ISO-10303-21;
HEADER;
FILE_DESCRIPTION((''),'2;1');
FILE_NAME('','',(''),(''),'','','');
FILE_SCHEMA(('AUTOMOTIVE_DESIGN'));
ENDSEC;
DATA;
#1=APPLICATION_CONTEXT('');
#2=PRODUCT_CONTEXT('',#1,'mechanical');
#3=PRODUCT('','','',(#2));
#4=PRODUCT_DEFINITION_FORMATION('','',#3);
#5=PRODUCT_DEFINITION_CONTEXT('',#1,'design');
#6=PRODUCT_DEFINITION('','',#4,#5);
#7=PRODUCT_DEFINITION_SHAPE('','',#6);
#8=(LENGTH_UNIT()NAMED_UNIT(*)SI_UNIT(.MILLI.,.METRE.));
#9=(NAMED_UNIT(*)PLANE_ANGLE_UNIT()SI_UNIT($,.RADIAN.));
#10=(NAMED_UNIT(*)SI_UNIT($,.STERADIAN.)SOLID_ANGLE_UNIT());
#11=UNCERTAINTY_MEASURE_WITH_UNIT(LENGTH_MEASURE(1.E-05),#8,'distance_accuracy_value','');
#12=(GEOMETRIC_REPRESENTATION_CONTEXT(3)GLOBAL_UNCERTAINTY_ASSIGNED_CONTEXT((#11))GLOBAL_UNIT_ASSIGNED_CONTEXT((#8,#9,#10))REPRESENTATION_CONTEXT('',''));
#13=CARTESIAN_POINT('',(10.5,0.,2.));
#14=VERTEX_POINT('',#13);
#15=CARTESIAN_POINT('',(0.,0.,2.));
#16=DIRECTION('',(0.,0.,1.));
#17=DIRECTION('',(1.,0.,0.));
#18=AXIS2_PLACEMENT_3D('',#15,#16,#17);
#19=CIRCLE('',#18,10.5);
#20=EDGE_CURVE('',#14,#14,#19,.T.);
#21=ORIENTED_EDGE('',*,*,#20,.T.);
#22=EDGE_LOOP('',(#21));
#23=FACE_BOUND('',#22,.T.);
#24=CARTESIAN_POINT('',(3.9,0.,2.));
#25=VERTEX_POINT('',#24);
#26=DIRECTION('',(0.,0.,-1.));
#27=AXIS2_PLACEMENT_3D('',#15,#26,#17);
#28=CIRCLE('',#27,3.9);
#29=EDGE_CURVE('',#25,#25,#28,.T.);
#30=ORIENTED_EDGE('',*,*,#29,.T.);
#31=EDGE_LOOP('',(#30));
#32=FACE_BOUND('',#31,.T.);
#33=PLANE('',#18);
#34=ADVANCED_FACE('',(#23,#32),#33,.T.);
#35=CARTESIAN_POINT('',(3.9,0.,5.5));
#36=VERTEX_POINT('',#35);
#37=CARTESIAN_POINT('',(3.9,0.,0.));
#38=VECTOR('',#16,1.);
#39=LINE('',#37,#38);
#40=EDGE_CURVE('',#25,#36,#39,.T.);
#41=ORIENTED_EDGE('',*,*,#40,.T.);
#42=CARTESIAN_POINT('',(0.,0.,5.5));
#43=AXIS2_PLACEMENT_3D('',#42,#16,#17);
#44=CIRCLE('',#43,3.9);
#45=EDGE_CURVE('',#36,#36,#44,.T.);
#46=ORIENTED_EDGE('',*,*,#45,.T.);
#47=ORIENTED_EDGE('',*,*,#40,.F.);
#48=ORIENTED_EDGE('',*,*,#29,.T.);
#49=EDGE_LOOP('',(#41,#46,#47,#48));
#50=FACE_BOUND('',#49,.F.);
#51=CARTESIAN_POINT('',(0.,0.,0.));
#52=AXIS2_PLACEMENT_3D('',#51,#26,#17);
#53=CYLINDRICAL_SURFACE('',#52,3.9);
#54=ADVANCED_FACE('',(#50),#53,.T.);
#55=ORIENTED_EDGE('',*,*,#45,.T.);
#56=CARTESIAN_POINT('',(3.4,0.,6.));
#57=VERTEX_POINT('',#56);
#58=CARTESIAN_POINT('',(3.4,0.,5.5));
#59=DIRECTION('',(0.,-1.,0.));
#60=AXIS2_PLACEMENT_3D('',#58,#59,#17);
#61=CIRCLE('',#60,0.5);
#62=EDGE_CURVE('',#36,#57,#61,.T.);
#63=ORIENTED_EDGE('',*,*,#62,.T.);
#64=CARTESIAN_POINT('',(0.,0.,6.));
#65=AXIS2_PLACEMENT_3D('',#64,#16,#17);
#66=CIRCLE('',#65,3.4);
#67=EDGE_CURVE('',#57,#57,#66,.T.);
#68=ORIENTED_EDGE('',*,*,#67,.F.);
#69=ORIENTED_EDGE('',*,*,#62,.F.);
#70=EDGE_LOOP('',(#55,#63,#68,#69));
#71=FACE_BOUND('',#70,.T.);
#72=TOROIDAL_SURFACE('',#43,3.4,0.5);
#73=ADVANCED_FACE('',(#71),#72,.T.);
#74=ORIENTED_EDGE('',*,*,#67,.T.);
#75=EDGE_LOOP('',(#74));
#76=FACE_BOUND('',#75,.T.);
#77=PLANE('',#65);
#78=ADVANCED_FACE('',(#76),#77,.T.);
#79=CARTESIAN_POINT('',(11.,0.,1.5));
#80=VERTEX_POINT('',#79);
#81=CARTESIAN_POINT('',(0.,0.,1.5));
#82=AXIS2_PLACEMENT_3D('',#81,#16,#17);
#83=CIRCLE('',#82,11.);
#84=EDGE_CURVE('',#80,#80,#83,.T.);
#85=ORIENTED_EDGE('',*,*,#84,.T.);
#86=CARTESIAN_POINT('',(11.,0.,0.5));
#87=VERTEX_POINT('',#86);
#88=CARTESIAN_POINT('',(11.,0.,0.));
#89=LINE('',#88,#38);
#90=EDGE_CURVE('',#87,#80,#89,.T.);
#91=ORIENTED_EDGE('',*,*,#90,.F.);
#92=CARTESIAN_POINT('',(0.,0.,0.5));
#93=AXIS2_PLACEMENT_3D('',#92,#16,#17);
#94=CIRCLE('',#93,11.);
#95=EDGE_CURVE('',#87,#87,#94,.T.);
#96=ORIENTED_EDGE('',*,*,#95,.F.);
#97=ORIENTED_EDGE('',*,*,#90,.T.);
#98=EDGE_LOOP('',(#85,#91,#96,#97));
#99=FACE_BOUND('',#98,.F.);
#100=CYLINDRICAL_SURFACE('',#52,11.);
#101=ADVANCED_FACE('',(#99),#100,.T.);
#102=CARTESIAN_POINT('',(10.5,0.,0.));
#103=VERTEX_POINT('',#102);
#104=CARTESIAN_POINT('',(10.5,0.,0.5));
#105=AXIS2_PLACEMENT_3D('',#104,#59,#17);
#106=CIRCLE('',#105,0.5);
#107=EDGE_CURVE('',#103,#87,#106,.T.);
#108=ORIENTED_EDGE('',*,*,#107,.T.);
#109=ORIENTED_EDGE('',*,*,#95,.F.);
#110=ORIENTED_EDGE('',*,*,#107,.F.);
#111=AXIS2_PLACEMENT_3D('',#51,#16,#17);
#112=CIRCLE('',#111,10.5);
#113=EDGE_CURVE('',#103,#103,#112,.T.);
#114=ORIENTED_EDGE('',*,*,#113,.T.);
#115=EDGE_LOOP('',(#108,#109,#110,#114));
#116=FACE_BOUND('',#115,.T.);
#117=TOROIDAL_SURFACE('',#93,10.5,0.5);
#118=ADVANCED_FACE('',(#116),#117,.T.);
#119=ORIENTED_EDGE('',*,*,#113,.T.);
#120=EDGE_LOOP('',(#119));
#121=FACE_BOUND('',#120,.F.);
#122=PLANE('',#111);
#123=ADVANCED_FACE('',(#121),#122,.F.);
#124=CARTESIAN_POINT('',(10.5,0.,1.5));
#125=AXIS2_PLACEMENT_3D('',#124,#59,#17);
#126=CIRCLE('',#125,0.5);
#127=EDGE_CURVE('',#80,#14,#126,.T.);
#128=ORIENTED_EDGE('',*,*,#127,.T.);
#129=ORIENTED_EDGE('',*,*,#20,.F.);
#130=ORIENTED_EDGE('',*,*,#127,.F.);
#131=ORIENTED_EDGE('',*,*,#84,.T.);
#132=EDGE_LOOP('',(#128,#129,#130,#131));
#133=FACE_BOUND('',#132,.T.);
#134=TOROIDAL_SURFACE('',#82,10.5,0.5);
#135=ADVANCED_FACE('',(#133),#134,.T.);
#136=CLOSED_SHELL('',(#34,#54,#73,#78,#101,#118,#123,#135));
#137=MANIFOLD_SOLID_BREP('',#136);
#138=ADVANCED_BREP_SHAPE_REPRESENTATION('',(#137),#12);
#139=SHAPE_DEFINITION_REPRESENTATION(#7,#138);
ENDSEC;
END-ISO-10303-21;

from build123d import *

# Parameters (mm, degrees)
F0_R     = 11
F1_DEPTH = 2
F2_R     = 3.9
F3_DEPTH = 6
F4_R     = 0.5


# Not quite as in the source:
# - a feature names something its author has since deleted; it is built from what else it names


with BuildPart() as f1:
    # F0 (on Top) → F1 (new body)
    with BuildSketch(Plane.XY):
        Circle(F0_R)
    extrude(amount=F1_DEPTH)

    # F2 (on Top) → F3 (join)
    with BuildSketch(Plane.XY):
        Circle(F2_R)
    extrude(amount=F3_DEPTH)

    # F4
    f4_edges = [f1.edges().sort_by_distance(p)[0] for p in [
        (-11, 0, 2),
        (-11, 0, 0),
        (-3.9, 0, 6),
    ]]
    fillet(f4_edges, radius=F4_R)


solid = f1.part
